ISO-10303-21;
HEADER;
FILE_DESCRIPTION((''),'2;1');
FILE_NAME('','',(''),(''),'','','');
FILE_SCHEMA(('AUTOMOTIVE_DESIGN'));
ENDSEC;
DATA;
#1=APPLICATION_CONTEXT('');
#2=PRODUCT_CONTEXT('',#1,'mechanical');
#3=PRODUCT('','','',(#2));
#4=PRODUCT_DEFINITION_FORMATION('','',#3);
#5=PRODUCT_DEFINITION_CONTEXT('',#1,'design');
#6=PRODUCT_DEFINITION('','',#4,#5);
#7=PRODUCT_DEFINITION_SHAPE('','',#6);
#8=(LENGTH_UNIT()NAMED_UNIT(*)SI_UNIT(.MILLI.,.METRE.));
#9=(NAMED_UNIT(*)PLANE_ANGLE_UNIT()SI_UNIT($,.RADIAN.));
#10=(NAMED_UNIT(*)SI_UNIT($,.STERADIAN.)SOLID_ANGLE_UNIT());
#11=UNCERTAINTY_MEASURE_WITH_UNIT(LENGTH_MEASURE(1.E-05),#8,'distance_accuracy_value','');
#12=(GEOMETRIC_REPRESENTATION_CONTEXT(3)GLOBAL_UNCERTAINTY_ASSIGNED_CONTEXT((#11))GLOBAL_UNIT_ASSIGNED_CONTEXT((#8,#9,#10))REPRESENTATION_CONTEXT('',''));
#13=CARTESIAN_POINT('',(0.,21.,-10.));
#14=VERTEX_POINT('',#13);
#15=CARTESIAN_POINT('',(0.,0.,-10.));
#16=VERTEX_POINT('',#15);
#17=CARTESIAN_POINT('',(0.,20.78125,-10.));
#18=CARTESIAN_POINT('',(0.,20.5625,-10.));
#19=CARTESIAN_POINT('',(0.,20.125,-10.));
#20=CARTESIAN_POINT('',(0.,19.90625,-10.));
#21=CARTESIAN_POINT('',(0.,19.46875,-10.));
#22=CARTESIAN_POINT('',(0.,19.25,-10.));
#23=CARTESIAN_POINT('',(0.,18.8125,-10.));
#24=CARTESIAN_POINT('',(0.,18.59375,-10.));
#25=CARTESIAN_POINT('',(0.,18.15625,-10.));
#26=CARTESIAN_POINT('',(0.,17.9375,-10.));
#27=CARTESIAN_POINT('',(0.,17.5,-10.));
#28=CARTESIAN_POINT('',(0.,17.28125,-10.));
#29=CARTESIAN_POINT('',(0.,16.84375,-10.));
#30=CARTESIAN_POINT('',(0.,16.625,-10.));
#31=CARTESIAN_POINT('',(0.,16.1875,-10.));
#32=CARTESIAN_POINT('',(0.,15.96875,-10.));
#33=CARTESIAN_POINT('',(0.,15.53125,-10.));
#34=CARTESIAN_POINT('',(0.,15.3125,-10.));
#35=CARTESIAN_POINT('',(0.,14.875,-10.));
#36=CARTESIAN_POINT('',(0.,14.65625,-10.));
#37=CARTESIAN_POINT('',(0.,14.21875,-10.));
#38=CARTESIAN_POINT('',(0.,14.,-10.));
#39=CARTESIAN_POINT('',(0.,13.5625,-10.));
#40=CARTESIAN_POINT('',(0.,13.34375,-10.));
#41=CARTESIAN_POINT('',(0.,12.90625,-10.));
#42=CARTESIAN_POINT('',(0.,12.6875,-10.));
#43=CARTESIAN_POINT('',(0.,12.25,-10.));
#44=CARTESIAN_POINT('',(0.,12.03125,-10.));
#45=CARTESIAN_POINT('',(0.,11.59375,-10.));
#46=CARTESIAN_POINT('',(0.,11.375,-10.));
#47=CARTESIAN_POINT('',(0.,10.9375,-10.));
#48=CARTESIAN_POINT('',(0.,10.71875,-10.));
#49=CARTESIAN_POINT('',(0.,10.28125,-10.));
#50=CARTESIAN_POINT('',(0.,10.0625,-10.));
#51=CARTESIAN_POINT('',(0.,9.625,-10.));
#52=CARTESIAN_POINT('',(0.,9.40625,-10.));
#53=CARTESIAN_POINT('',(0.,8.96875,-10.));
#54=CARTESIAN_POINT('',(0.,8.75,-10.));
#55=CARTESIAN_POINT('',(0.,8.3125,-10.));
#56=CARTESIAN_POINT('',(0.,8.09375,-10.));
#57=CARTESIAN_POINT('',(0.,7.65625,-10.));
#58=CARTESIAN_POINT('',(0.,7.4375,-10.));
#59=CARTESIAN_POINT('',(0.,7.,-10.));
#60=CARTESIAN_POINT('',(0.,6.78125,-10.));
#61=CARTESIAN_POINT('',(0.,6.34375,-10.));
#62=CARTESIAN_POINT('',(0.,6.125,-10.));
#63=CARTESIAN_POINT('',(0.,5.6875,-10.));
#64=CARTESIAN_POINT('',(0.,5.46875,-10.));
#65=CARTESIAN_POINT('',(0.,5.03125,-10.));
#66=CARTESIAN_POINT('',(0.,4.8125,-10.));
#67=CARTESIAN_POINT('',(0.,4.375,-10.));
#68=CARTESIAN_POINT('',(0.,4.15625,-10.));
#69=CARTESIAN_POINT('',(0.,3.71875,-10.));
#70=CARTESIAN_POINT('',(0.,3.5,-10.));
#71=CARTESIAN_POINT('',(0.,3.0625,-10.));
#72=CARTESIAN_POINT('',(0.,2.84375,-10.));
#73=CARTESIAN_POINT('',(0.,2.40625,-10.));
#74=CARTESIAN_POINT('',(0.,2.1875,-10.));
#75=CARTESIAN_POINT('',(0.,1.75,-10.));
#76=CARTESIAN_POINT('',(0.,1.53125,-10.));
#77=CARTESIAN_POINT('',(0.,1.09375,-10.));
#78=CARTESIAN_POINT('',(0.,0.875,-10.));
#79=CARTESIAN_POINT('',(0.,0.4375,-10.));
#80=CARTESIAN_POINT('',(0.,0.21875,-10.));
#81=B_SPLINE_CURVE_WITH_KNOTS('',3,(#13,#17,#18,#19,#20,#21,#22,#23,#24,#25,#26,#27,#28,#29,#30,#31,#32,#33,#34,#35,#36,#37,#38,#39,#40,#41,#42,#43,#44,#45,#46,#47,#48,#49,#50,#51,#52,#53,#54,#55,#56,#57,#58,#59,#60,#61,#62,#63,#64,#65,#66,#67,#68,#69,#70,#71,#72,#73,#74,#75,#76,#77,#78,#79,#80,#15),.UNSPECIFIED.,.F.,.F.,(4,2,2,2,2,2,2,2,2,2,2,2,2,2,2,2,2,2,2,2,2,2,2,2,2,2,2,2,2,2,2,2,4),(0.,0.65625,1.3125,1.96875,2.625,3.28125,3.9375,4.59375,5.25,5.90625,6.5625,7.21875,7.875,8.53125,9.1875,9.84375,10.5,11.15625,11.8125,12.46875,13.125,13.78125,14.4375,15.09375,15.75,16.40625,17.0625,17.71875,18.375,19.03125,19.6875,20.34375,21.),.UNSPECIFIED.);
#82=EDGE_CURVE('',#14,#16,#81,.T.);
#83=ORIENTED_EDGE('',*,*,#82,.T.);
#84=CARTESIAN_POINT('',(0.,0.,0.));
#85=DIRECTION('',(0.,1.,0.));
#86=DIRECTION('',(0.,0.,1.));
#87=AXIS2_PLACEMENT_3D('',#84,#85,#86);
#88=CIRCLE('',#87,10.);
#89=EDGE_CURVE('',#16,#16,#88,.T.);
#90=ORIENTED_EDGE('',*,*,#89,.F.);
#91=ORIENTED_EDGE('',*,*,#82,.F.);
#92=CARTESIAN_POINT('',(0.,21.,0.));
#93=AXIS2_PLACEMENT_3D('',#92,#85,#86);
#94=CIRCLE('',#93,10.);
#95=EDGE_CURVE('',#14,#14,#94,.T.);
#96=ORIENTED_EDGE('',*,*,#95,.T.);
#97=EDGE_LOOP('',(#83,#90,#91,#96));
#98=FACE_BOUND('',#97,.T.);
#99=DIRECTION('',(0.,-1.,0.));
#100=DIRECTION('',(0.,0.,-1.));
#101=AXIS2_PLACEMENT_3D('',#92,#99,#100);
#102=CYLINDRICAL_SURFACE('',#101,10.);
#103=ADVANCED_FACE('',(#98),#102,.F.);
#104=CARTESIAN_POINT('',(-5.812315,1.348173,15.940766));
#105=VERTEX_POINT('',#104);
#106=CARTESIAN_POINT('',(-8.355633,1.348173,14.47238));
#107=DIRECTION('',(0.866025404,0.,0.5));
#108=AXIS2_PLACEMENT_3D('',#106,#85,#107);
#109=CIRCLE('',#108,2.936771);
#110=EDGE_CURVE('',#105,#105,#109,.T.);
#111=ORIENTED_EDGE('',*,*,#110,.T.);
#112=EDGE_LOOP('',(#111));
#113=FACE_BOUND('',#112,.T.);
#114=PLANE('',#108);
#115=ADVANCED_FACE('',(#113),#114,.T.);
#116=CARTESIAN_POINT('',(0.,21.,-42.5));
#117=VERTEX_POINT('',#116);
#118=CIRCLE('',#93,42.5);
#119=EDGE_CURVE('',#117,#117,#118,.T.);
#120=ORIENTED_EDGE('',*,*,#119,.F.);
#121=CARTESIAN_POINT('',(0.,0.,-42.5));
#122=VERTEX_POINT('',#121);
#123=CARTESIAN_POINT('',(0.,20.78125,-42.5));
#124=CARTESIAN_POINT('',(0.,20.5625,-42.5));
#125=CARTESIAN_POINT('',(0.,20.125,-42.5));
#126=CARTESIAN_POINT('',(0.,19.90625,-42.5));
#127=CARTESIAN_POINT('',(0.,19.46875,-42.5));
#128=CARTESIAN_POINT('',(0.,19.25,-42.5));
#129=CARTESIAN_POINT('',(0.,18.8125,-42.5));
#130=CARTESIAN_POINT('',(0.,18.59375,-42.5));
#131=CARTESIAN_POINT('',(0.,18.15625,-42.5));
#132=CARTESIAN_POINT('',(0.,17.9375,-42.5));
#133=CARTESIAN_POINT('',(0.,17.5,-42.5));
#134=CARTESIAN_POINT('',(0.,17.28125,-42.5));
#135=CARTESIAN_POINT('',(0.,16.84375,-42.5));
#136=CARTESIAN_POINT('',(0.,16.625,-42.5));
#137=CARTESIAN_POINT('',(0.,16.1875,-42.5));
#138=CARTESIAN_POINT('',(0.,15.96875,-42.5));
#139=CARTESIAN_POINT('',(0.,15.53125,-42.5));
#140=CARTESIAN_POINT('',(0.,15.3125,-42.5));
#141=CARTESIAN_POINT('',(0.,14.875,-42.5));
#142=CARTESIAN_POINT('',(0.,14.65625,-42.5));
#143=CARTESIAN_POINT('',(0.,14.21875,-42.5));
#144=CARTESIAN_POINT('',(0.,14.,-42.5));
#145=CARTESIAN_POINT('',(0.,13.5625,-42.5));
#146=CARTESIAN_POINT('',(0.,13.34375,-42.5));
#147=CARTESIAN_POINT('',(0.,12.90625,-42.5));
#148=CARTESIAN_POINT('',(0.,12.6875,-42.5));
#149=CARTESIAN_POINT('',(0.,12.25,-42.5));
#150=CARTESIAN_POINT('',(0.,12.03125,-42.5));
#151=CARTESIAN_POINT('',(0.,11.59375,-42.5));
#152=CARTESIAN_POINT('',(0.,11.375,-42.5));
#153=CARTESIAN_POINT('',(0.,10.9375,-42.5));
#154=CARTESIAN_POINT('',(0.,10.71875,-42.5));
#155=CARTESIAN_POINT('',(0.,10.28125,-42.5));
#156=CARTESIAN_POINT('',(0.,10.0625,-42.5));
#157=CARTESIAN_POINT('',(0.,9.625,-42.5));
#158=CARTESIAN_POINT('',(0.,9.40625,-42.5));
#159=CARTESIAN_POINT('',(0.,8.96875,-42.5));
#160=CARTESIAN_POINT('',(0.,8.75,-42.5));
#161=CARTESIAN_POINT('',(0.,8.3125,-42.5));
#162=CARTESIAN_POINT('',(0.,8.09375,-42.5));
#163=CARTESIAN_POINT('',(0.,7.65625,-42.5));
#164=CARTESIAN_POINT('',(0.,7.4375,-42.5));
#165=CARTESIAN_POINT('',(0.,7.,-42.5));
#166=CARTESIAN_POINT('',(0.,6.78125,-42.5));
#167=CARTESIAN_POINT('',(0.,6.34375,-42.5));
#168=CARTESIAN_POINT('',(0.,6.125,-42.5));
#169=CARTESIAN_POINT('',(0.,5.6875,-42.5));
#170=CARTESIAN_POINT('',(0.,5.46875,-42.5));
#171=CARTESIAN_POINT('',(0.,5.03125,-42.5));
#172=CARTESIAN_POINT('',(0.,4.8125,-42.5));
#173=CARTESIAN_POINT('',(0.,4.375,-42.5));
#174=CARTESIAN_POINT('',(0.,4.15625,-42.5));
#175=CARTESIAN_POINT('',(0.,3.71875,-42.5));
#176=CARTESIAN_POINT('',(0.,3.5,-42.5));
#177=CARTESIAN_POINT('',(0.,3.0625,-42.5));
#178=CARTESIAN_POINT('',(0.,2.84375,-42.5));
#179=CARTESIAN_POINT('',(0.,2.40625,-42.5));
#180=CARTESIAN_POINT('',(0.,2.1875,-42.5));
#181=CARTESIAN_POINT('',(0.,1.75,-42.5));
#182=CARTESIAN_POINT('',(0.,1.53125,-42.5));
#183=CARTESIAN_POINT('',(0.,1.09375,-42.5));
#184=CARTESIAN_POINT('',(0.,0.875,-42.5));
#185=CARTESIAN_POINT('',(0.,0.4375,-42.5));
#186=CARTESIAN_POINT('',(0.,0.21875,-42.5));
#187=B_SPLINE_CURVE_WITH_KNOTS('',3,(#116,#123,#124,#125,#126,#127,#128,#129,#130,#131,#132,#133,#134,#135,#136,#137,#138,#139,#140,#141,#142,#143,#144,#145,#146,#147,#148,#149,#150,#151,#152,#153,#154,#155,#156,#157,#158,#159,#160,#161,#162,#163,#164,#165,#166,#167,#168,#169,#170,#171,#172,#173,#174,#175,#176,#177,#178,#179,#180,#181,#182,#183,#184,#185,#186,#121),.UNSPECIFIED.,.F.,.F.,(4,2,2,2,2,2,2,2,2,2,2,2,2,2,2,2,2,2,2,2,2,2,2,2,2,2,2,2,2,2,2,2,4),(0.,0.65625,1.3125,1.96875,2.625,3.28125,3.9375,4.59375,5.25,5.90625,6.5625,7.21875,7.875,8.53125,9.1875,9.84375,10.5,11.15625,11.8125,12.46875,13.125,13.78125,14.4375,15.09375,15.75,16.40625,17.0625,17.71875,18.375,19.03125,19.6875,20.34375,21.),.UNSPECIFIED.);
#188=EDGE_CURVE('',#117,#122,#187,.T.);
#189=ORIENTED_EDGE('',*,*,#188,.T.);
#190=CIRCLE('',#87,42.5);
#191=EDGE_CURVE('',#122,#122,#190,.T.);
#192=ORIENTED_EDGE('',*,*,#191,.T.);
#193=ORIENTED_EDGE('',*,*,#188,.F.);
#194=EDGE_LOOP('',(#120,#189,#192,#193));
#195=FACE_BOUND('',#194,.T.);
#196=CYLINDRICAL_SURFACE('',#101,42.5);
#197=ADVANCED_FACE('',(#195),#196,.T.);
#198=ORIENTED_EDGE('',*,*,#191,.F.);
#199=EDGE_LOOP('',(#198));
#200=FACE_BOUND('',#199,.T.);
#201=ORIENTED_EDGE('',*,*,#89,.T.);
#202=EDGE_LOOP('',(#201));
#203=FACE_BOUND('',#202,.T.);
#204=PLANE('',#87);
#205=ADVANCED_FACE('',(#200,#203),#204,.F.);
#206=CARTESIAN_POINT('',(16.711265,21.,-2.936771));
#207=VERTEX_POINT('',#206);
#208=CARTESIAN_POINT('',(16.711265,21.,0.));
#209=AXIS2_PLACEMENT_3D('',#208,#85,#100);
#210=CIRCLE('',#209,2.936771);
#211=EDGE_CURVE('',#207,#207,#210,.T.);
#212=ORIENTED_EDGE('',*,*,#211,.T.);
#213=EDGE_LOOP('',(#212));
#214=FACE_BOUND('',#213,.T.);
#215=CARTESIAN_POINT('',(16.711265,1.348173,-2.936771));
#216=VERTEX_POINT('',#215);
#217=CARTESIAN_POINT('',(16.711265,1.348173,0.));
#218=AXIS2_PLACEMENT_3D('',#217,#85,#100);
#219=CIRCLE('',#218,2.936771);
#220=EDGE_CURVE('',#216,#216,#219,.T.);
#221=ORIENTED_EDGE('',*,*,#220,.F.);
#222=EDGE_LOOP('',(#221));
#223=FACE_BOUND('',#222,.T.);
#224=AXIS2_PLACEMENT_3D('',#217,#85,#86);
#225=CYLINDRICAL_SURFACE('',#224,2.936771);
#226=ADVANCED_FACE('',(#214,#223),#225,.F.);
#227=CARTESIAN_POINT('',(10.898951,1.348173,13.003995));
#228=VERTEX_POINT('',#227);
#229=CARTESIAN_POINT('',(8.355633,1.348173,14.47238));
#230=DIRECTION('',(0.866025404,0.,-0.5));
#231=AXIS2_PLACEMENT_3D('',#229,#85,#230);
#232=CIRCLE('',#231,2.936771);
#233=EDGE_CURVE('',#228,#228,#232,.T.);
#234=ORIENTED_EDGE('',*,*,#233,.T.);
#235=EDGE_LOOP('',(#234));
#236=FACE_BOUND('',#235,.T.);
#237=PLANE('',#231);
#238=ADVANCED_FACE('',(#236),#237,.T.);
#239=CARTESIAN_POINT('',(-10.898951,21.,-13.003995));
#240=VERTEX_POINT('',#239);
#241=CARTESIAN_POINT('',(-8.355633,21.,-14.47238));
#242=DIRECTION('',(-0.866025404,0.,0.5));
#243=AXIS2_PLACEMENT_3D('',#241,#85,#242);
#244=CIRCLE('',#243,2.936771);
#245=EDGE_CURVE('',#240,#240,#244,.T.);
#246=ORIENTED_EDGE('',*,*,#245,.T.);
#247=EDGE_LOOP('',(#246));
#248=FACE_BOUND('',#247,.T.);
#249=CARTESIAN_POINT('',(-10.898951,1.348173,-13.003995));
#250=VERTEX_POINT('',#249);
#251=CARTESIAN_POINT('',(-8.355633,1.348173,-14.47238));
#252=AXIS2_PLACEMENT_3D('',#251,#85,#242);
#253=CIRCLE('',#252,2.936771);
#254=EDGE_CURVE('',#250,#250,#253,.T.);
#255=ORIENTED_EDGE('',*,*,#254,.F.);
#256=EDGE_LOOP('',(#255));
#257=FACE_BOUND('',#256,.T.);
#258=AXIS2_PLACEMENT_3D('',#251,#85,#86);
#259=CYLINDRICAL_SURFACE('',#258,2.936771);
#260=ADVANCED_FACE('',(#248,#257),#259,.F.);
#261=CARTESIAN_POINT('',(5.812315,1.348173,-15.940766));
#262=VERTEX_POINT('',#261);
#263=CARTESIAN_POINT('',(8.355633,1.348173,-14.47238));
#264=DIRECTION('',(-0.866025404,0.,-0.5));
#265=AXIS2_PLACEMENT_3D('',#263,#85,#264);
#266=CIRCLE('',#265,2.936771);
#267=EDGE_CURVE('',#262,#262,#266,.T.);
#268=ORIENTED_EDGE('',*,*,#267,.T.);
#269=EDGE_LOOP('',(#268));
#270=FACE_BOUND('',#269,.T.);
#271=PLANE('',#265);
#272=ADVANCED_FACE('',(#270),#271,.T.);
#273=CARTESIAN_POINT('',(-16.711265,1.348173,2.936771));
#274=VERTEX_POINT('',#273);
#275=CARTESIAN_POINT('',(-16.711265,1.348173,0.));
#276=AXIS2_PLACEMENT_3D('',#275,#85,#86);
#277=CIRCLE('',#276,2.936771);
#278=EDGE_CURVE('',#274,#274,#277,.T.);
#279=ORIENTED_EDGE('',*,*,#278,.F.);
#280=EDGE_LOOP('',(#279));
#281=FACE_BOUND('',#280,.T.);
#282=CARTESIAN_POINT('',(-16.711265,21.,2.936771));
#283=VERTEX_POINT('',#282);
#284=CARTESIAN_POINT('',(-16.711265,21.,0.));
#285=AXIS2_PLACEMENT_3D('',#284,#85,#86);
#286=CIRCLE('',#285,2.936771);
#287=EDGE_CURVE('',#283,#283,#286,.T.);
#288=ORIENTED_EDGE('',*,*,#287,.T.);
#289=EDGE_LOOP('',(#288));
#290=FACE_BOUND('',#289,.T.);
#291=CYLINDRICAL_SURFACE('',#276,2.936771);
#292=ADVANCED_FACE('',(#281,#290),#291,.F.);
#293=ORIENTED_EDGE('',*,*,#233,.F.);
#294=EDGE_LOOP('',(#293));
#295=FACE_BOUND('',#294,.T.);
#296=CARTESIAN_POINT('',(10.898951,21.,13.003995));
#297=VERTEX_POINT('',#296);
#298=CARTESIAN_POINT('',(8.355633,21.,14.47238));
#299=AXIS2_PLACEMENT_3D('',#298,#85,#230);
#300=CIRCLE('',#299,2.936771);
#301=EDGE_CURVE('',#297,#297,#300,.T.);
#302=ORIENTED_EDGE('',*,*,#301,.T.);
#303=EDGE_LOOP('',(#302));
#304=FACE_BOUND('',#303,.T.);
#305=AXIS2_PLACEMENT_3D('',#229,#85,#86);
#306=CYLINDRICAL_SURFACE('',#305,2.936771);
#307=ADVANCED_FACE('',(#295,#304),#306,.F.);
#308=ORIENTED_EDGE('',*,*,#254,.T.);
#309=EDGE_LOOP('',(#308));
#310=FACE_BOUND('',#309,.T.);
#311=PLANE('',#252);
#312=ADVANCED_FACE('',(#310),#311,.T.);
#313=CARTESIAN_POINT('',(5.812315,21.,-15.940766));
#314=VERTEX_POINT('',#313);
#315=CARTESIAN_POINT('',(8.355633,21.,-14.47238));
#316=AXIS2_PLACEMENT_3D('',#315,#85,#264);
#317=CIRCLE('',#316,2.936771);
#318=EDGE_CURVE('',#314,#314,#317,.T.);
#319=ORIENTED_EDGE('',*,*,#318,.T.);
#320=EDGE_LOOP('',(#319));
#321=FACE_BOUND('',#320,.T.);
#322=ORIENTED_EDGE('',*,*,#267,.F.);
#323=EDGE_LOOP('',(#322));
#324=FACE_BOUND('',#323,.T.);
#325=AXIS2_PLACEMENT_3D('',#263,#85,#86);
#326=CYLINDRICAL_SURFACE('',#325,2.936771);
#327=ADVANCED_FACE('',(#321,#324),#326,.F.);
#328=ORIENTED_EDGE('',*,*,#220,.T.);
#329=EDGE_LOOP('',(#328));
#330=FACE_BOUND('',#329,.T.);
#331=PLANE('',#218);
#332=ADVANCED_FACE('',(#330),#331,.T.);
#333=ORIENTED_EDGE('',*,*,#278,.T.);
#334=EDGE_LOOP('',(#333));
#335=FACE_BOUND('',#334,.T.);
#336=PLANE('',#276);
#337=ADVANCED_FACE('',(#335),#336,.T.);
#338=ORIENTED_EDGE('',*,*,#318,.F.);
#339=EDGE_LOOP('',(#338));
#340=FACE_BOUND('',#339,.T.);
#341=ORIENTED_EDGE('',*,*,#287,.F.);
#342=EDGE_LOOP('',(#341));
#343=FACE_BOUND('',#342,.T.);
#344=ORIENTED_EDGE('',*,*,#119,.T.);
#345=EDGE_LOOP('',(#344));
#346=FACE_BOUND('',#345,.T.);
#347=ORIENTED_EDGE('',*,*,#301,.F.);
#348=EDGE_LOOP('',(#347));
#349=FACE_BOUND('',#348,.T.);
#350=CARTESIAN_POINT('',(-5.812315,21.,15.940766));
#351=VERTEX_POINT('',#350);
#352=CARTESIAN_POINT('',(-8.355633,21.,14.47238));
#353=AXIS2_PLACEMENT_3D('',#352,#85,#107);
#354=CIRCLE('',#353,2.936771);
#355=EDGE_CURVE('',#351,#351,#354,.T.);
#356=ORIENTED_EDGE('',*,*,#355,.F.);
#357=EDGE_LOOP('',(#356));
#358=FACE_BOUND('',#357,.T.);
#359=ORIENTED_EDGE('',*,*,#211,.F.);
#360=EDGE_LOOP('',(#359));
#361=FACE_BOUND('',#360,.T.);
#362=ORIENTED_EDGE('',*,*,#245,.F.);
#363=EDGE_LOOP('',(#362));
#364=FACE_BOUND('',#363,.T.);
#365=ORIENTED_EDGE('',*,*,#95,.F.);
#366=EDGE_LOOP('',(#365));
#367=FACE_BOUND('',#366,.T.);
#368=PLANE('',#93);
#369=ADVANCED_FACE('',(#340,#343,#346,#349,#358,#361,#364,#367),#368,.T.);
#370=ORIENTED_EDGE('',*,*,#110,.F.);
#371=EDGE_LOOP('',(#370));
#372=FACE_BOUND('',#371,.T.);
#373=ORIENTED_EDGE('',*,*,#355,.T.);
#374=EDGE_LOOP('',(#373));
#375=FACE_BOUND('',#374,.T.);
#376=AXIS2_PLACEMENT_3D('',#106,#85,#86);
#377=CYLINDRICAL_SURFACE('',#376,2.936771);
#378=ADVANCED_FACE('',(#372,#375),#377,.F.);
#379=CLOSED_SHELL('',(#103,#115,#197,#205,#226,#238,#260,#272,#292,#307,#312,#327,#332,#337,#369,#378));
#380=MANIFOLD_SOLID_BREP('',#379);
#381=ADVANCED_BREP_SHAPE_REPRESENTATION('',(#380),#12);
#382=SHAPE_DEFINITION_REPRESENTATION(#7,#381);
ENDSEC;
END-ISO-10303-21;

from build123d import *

# Parameters (mm, degrees)
SKETCH1_R           = 42.5
BOSS_EXTRUDE1_DEPTH = 21
SKETCH2_R           = 10
CUT_EXTRUDE1_DEPTH  = 64.667102965
SKETCH3_R           = 2.936770542
CUT_EXTRUDE2_DEPTH  = 19.651826989
CIRPATTERN1_COUNT   = 6


with BuildPart() as part:
    # Sketch1 → Boss-Extrude1 (new body)
    with BuildSketch(Plane(origin=(0, 0, 0), x_dir=(1, 0, 0), z_dir=(0, 1, 0))):
        Circle(SKETCH1_R)
    extrude(amount=BOSS_EXTRUDE1_DEPTH)

    # Sketch2 → Cut-Extrude1 (cut, through all)
    with BuildSketch(Plane(origin=(0, 0, 0), x_dir=(1, 0, 0), z_dir=(0, 1, 0))):
        Circle(SKETCH2_R)
    extrude(amount=CUT_EXTRUDE1_DEPTH, mode=Mode.SUBTRACT)

    # Sketch3 → Cut-Extrude2 (cut)
    with BuildSketch(Plane(origin=(0, 21, 0), x_dir=(1, 0, 0), z_dir=(0, 1, 0))):
        with Locations((-16.71126544, 0)):
            Circle(SKETCH3_R)
    cut_extrude2 = extrude(amount=-CUT_EXTRUDE2_DEPTH, mode=Mode.SUBTRACT)

    # CirPattern1: Cut-Extrude2 ×6 about axis
    cirpattern1_axis = Axis((0, 0, 0), (0, 1, 0))
    for i in range(1, CIRPATTERN1_COUNT):
        add(cut_extrude2.rotate(cirpattern1_axis, i * 360 / CIRPATTERN1_COUNT), mode=Mode.SUBTRACT)


solid = part.part
